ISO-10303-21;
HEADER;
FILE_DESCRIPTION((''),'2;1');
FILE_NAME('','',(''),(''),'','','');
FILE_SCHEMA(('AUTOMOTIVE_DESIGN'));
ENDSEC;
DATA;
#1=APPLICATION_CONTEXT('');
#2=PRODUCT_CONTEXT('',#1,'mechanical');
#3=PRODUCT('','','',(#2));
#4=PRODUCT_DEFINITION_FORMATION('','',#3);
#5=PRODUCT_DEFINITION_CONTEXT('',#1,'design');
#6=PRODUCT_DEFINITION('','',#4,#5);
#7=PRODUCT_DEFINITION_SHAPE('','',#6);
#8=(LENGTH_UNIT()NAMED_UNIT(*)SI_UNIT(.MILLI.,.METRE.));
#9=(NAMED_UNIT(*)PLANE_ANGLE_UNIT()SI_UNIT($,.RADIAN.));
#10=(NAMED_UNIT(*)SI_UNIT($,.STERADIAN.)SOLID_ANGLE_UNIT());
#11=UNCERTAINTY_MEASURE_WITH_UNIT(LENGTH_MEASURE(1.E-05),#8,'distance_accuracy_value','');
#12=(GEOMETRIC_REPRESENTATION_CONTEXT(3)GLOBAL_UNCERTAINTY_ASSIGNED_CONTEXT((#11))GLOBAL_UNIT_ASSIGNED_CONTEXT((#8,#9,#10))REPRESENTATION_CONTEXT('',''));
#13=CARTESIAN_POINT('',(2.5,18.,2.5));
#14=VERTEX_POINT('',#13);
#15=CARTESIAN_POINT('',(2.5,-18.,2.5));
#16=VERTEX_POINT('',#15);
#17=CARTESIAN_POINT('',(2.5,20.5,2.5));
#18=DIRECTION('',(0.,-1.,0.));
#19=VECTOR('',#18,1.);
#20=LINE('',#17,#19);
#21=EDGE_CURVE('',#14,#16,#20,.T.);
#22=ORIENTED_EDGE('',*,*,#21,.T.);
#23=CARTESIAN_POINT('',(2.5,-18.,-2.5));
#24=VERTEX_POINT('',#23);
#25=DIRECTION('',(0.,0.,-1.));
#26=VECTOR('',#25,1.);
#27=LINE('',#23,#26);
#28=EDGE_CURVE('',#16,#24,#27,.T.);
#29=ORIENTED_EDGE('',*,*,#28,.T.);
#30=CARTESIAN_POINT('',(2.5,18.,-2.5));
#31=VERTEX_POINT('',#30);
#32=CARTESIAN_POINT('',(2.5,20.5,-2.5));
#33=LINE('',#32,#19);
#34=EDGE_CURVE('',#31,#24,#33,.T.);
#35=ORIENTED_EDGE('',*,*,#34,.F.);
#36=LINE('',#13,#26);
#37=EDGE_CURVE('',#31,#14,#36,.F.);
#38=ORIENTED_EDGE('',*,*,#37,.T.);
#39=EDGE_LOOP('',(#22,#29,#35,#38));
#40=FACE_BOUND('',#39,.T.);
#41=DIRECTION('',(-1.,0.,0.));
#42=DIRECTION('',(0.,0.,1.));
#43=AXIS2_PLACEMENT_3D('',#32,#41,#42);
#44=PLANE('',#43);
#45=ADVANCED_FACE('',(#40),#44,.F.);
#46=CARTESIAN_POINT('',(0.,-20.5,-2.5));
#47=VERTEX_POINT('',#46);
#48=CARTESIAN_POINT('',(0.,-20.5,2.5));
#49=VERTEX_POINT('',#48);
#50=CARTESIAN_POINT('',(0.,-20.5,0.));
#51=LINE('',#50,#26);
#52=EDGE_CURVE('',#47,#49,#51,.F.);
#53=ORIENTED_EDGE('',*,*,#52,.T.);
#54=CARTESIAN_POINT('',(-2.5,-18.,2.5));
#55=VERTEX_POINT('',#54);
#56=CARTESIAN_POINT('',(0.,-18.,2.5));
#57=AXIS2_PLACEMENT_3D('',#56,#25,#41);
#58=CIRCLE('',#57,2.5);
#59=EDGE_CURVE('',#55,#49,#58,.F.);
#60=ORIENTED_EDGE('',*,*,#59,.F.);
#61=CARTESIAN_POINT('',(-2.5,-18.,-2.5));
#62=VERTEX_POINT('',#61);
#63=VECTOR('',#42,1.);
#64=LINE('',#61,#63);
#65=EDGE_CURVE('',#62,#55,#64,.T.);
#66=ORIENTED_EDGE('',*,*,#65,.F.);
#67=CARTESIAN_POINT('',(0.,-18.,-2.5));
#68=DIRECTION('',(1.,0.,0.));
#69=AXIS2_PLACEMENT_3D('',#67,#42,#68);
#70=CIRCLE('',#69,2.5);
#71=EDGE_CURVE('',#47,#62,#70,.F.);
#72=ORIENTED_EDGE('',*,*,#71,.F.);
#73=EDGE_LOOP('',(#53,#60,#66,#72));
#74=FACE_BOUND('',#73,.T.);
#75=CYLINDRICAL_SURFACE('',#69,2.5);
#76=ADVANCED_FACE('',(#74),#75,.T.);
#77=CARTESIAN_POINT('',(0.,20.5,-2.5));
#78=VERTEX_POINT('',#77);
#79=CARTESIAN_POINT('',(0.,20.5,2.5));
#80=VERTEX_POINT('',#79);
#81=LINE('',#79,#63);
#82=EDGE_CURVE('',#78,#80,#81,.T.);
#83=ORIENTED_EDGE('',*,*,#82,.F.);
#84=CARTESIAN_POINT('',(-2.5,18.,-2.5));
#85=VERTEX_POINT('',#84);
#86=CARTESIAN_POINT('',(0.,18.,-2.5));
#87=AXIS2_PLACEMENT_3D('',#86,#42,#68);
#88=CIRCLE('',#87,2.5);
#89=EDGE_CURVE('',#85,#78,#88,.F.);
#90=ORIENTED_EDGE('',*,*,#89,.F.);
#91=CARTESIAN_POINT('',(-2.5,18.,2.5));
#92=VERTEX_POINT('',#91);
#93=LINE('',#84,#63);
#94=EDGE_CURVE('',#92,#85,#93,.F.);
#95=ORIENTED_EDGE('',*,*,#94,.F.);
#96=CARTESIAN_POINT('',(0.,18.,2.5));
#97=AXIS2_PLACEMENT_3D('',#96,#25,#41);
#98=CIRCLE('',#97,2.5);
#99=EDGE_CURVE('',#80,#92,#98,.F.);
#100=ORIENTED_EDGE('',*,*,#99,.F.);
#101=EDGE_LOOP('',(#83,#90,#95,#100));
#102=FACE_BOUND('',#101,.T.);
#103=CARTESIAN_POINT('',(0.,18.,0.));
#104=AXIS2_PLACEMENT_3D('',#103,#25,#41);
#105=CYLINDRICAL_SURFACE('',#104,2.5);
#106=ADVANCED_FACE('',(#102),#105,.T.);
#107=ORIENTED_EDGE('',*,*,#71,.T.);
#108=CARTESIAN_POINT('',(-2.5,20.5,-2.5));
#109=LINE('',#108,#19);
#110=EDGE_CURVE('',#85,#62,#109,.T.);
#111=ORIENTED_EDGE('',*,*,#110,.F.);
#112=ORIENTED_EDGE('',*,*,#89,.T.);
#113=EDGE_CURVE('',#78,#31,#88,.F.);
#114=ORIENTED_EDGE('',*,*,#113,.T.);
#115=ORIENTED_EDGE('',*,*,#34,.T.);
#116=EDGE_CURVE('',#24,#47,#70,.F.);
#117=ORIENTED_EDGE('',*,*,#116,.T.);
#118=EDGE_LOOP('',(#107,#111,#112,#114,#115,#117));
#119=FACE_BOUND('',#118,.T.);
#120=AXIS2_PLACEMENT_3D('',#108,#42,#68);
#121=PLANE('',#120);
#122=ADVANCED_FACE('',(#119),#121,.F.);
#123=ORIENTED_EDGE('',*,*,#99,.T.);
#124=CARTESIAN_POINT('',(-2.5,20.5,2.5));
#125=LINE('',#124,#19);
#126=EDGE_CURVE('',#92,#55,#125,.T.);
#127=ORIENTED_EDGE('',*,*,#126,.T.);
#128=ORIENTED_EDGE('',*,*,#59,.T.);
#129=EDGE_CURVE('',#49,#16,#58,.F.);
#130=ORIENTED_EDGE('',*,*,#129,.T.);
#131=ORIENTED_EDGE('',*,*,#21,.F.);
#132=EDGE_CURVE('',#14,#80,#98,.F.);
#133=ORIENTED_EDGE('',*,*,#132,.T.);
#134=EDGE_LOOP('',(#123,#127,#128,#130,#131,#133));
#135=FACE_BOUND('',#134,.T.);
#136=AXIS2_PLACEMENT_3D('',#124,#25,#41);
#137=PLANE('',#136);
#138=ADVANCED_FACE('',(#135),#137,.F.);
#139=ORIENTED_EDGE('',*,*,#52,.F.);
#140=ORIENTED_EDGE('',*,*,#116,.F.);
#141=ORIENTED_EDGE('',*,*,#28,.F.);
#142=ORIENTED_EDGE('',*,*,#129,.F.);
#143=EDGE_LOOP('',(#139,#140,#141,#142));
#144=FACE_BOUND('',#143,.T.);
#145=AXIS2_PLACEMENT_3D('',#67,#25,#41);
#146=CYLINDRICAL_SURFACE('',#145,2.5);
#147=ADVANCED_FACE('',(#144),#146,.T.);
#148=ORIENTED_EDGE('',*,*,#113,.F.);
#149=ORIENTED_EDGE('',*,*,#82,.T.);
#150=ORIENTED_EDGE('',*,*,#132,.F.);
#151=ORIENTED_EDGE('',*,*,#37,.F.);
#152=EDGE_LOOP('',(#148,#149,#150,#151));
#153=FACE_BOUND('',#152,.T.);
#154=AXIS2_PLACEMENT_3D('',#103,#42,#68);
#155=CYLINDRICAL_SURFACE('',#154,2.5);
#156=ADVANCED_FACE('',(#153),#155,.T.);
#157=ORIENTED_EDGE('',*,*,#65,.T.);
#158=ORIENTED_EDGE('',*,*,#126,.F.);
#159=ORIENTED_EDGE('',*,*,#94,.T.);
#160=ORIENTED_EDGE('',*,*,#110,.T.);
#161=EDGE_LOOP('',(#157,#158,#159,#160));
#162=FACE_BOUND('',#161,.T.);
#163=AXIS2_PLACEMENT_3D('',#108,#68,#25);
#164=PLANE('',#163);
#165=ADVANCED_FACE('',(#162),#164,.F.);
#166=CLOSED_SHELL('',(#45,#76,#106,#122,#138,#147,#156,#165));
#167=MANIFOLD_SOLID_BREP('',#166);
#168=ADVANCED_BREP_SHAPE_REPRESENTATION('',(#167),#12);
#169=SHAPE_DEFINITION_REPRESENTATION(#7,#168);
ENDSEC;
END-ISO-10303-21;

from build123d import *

# Parameters (mm, degrees)
SKETCH1_W           = 5
SKETCH1_H           = 5
BOSS_EXTRUDE1_DEPTH = 20.5
FILLET1_R           = 2.5


with BuildPart() as part:
    # Sketch1 → Boss-Extrude1 (new, symmetric)
    with BuildSketch(Plane(origin=(0, 0, 0), x_dir=(1, 0, 0), z_dir=(0, 1, 0))):
        Rectangle(SKETCH1_W, SKETCH1_H)
    extrude(amount=BOSS_EXTRUDE1_DEPTH, both=True)

    # Fillet1
    fillet1_edges = [part.edges().sort_by_distance(p)[0] for p in [
        (-2.5, -20.5, 0),
        (2.5, -20.5, 0),
        (2.5, 20.5, 0),
        (-2.5, 20.5, 0),
    ]]
    fillet(fillet1_edges, radius=FILLET1_R - 0.0001)  # a hair under: the kernel refuses the full size


solid = part.part
